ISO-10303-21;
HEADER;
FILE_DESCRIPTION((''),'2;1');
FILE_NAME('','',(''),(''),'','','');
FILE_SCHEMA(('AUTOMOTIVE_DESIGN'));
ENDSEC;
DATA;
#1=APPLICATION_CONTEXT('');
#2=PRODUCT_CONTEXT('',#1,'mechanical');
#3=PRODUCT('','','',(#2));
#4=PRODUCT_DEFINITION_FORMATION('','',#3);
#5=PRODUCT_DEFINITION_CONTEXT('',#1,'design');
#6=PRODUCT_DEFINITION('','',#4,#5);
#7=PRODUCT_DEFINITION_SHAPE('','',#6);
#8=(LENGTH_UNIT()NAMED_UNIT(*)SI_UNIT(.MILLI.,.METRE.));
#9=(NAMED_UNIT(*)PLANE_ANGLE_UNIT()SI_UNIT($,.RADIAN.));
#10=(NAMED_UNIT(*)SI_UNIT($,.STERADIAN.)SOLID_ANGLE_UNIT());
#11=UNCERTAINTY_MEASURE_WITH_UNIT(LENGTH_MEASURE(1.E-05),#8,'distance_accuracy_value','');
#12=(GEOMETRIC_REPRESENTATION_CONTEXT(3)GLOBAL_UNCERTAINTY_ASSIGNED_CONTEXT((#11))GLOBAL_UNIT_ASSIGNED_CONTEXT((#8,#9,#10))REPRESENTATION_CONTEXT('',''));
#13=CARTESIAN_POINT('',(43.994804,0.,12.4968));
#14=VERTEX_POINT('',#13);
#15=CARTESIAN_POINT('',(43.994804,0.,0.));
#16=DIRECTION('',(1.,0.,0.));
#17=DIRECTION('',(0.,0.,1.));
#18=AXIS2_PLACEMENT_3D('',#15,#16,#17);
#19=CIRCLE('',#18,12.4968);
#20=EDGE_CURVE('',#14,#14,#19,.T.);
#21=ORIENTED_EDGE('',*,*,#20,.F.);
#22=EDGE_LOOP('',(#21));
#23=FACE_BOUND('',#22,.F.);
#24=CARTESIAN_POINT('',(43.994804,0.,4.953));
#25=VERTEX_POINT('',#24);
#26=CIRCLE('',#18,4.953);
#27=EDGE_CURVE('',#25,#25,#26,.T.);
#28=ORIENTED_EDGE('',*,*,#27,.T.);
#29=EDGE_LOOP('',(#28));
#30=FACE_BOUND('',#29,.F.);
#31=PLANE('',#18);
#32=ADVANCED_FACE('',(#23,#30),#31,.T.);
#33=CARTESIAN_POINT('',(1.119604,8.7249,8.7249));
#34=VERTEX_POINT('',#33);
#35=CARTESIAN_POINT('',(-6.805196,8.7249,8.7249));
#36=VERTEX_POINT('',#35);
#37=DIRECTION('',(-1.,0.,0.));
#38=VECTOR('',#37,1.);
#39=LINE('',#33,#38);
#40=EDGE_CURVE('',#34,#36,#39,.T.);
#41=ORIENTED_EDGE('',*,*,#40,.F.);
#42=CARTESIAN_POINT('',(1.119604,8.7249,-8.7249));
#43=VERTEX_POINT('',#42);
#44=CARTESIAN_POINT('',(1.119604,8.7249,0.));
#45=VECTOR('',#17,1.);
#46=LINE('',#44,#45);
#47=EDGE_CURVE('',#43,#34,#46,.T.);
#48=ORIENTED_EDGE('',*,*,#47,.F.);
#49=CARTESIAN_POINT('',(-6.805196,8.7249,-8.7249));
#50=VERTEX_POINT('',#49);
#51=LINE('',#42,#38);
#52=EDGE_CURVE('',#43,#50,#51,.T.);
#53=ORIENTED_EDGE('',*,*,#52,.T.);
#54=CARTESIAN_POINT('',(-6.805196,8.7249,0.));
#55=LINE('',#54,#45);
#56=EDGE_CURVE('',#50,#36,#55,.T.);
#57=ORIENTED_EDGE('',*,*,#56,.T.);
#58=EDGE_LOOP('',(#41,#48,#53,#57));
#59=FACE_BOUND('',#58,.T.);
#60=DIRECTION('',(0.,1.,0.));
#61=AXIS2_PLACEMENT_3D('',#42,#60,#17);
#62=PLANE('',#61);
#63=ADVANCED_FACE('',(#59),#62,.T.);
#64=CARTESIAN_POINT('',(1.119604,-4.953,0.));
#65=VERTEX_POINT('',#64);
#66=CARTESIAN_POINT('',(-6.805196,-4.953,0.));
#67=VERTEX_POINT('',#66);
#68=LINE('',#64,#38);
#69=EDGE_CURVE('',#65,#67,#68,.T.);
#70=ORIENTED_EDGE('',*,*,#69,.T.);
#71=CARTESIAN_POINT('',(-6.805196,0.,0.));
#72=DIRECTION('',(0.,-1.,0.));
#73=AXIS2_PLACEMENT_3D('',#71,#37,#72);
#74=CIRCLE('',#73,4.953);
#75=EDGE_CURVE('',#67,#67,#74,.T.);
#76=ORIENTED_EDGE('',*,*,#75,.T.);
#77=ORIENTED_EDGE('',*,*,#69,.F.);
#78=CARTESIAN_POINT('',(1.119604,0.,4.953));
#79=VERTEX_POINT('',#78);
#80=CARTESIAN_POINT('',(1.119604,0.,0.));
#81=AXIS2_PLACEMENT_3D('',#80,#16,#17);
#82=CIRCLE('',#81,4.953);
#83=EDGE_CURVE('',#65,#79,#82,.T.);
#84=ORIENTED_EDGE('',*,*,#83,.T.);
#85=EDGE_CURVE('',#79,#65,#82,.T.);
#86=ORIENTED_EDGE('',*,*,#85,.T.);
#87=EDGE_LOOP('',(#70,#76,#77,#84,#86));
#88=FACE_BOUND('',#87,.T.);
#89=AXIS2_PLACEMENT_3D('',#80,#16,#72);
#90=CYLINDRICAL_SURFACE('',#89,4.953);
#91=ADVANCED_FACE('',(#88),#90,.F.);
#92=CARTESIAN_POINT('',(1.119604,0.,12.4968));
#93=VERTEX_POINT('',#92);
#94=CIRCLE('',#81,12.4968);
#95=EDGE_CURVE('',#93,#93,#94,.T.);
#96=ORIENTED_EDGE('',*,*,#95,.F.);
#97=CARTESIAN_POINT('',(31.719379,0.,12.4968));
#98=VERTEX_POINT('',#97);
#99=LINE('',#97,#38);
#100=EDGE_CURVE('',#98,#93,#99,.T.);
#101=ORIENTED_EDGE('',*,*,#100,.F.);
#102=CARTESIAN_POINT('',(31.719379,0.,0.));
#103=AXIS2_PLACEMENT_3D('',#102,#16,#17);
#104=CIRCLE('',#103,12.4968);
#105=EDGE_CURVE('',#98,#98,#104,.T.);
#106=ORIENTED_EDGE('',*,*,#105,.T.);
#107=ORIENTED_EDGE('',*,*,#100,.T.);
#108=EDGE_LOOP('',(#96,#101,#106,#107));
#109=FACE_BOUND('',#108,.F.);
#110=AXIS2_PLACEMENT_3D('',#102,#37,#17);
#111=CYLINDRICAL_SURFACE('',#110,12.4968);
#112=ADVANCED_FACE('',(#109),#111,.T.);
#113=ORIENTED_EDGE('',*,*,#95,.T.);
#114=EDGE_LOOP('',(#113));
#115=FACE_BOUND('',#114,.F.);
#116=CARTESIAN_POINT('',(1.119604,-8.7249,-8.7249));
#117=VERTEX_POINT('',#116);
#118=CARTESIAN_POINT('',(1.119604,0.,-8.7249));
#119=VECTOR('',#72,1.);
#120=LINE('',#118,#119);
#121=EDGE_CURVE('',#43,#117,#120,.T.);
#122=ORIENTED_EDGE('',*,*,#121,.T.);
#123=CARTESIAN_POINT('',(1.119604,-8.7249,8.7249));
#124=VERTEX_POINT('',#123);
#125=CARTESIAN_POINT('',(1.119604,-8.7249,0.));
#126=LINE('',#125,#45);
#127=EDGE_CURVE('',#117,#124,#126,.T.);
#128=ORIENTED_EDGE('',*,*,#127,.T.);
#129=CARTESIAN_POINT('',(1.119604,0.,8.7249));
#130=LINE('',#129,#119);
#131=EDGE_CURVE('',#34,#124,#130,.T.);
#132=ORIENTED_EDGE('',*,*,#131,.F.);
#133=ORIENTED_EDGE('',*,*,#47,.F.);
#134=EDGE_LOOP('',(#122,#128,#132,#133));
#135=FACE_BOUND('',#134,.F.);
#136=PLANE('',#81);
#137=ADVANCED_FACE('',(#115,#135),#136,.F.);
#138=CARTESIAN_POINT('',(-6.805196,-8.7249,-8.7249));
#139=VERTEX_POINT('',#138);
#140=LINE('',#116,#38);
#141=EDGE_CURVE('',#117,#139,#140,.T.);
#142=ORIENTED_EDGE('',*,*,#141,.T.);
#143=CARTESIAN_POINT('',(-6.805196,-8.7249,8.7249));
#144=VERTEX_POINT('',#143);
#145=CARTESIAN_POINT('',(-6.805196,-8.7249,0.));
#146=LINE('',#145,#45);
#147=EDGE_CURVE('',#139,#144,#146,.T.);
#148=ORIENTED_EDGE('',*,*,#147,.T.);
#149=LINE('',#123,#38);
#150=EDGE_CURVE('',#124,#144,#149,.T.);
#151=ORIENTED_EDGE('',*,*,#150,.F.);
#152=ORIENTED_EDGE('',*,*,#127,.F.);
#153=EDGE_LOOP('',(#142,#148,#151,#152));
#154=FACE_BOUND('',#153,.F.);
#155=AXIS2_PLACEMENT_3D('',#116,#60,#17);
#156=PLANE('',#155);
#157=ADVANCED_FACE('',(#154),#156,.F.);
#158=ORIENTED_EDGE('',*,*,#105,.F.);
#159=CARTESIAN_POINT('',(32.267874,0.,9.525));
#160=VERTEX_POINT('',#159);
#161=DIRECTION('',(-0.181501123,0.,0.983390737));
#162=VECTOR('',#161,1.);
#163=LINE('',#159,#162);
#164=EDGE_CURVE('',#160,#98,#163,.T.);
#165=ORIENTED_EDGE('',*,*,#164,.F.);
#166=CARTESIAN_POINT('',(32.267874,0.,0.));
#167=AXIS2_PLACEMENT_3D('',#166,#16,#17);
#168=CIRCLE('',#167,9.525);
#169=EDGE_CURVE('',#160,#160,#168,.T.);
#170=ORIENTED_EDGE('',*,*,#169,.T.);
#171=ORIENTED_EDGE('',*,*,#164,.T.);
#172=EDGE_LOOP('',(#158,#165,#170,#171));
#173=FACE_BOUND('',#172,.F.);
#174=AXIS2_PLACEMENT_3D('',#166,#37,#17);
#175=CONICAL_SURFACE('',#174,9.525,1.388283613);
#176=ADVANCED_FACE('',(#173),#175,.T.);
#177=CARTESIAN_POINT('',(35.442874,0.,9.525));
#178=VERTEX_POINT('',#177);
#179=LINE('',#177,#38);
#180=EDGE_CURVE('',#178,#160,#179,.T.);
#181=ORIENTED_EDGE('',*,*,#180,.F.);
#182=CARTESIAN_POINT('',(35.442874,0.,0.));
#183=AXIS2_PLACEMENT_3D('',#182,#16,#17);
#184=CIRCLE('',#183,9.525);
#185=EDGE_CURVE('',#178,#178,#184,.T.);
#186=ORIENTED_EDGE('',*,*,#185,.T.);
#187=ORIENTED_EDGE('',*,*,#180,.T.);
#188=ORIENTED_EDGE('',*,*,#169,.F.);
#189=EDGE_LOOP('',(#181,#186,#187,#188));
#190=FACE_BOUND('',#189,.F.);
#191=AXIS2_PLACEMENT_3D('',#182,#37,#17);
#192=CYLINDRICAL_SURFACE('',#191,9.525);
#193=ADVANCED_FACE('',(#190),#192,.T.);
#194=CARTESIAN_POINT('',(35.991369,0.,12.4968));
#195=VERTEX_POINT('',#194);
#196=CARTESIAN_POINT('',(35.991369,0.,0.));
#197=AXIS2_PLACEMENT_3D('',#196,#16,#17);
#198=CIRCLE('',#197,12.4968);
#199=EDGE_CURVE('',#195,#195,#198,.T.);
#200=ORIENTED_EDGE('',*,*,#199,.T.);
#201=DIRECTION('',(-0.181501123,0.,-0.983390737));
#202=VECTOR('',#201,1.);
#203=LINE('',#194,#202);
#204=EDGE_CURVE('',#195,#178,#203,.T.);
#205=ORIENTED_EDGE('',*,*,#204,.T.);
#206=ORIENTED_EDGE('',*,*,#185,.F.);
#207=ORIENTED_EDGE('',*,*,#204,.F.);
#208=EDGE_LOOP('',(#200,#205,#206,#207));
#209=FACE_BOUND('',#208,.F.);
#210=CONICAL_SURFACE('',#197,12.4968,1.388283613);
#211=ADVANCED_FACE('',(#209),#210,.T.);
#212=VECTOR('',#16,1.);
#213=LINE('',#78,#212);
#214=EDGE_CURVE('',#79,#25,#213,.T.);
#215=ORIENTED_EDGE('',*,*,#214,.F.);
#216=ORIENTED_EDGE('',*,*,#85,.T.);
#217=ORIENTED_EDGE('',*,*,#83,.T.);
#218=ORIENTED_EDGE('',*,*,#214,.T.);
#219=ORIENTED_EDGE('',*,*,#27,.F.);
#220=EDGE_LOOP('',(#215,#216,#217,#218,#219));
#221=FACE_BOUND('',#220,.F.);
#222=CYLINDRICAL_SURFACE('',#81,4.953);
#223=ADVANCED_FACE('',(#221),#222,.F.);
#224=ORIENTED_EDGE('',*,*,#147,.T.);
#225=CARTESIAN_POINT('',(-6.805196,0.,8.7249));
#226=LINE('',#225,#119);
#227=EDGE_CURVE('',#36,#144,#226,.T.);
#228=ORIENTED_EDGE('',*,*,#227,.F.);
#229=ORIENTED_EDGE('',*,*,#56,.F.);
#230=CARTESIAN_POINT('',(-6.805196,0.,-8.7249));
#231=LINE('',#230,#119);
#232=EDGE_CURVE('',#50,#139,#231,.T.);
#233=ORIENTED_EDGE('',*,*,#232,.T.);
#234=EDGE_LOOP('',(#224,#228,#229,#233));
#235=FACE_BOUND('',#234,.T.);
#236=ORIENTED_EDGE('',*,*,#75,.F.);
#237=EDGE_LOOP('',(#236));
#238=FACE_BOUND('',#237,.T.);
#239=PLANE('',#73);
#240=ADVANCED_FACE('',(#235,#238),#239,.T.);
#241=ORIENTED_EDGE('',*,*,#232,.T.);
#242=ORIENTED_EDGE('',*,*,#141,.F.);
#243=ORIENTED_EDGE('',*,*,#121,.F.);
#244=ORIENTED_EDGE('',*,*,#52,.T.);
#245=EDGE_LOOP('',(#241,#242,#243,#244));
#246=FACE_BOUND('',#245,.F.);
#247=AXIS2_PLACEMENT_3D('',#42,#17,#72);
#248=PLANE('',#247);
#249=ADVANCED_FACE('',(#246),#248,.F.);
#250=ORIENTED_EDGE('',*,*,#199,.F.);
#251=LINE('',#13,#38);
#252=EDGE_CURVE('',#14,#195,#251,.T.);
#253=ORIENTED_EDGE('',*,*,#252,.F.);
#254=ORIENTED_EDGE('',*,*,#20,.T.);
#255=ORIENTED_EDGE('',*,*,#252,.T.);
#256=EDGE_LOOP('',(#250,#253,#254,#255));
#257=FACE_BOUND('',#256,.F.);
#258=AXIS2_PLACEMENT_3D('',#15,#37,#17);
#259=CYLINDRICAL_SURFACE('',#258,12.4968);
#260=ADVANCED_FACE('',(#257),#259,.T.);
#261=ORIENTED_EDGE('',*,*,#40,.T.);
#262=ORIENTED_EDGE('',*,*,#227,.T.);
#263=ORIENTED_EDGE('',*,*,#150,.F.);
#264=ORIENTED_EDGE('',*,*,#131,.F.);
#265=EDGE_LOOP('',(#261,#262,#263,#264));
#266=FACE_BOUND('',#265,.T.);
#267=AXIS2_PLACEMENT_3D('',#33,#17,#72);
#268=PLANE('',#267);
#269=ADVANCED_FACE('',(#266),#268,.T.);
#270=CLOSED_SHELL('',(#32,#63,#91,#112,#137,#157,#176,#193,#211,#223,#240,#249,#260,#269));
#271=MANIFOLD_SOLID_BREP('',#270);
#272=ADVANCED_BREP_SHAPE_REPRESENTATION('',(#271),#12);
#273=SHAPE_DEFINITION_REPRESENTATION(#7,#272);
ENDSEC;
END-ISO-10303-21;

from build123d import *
from build123d import SkipClean  # not in build123d's __all__

# Parameters (mm, degrees)
F2_W     = 17.4498
F2_H     = 17.4498
F2_R     = 4.953
F3_DEPTH = 7.9248


with BuildPart() as f1:
    # F0 (on Front) → F1 (revolve)
    with BuildSketch(Plane.XZ):
        Polygon((1.1196035955, 9.525), (1.1196035955, 4.953), (43.9948035955, 4.953), (43.9948035955, 12.4968), (35.9913689879, 12.4968), (35.4428738503, 9.525), (32.2678738503, 9.525), (31.7193787128, 12.4968), (1.1196035955, 12.4968), align=None)
    revolve(axis=Axis((1.9816491438, 0, 0), (1, 0, 0)))

    # F2 (on face) → F3 (join)
    with BuildSketch(Plane(origin=(1.1196035955, 0, 0), x_dir=(0, -1, 0), z_dir=(-1, 0, 0))):
        Rectangle(F2_W, F2_H)
        Circle(F2_R, mode=Mode.SUBTRACT)
    with SkipClean():  # cleaning this boolean's faces spoils the solid; the shape is the same uncleaned
        extrude(amount=F3_DEPTH)


solid = f1.part
